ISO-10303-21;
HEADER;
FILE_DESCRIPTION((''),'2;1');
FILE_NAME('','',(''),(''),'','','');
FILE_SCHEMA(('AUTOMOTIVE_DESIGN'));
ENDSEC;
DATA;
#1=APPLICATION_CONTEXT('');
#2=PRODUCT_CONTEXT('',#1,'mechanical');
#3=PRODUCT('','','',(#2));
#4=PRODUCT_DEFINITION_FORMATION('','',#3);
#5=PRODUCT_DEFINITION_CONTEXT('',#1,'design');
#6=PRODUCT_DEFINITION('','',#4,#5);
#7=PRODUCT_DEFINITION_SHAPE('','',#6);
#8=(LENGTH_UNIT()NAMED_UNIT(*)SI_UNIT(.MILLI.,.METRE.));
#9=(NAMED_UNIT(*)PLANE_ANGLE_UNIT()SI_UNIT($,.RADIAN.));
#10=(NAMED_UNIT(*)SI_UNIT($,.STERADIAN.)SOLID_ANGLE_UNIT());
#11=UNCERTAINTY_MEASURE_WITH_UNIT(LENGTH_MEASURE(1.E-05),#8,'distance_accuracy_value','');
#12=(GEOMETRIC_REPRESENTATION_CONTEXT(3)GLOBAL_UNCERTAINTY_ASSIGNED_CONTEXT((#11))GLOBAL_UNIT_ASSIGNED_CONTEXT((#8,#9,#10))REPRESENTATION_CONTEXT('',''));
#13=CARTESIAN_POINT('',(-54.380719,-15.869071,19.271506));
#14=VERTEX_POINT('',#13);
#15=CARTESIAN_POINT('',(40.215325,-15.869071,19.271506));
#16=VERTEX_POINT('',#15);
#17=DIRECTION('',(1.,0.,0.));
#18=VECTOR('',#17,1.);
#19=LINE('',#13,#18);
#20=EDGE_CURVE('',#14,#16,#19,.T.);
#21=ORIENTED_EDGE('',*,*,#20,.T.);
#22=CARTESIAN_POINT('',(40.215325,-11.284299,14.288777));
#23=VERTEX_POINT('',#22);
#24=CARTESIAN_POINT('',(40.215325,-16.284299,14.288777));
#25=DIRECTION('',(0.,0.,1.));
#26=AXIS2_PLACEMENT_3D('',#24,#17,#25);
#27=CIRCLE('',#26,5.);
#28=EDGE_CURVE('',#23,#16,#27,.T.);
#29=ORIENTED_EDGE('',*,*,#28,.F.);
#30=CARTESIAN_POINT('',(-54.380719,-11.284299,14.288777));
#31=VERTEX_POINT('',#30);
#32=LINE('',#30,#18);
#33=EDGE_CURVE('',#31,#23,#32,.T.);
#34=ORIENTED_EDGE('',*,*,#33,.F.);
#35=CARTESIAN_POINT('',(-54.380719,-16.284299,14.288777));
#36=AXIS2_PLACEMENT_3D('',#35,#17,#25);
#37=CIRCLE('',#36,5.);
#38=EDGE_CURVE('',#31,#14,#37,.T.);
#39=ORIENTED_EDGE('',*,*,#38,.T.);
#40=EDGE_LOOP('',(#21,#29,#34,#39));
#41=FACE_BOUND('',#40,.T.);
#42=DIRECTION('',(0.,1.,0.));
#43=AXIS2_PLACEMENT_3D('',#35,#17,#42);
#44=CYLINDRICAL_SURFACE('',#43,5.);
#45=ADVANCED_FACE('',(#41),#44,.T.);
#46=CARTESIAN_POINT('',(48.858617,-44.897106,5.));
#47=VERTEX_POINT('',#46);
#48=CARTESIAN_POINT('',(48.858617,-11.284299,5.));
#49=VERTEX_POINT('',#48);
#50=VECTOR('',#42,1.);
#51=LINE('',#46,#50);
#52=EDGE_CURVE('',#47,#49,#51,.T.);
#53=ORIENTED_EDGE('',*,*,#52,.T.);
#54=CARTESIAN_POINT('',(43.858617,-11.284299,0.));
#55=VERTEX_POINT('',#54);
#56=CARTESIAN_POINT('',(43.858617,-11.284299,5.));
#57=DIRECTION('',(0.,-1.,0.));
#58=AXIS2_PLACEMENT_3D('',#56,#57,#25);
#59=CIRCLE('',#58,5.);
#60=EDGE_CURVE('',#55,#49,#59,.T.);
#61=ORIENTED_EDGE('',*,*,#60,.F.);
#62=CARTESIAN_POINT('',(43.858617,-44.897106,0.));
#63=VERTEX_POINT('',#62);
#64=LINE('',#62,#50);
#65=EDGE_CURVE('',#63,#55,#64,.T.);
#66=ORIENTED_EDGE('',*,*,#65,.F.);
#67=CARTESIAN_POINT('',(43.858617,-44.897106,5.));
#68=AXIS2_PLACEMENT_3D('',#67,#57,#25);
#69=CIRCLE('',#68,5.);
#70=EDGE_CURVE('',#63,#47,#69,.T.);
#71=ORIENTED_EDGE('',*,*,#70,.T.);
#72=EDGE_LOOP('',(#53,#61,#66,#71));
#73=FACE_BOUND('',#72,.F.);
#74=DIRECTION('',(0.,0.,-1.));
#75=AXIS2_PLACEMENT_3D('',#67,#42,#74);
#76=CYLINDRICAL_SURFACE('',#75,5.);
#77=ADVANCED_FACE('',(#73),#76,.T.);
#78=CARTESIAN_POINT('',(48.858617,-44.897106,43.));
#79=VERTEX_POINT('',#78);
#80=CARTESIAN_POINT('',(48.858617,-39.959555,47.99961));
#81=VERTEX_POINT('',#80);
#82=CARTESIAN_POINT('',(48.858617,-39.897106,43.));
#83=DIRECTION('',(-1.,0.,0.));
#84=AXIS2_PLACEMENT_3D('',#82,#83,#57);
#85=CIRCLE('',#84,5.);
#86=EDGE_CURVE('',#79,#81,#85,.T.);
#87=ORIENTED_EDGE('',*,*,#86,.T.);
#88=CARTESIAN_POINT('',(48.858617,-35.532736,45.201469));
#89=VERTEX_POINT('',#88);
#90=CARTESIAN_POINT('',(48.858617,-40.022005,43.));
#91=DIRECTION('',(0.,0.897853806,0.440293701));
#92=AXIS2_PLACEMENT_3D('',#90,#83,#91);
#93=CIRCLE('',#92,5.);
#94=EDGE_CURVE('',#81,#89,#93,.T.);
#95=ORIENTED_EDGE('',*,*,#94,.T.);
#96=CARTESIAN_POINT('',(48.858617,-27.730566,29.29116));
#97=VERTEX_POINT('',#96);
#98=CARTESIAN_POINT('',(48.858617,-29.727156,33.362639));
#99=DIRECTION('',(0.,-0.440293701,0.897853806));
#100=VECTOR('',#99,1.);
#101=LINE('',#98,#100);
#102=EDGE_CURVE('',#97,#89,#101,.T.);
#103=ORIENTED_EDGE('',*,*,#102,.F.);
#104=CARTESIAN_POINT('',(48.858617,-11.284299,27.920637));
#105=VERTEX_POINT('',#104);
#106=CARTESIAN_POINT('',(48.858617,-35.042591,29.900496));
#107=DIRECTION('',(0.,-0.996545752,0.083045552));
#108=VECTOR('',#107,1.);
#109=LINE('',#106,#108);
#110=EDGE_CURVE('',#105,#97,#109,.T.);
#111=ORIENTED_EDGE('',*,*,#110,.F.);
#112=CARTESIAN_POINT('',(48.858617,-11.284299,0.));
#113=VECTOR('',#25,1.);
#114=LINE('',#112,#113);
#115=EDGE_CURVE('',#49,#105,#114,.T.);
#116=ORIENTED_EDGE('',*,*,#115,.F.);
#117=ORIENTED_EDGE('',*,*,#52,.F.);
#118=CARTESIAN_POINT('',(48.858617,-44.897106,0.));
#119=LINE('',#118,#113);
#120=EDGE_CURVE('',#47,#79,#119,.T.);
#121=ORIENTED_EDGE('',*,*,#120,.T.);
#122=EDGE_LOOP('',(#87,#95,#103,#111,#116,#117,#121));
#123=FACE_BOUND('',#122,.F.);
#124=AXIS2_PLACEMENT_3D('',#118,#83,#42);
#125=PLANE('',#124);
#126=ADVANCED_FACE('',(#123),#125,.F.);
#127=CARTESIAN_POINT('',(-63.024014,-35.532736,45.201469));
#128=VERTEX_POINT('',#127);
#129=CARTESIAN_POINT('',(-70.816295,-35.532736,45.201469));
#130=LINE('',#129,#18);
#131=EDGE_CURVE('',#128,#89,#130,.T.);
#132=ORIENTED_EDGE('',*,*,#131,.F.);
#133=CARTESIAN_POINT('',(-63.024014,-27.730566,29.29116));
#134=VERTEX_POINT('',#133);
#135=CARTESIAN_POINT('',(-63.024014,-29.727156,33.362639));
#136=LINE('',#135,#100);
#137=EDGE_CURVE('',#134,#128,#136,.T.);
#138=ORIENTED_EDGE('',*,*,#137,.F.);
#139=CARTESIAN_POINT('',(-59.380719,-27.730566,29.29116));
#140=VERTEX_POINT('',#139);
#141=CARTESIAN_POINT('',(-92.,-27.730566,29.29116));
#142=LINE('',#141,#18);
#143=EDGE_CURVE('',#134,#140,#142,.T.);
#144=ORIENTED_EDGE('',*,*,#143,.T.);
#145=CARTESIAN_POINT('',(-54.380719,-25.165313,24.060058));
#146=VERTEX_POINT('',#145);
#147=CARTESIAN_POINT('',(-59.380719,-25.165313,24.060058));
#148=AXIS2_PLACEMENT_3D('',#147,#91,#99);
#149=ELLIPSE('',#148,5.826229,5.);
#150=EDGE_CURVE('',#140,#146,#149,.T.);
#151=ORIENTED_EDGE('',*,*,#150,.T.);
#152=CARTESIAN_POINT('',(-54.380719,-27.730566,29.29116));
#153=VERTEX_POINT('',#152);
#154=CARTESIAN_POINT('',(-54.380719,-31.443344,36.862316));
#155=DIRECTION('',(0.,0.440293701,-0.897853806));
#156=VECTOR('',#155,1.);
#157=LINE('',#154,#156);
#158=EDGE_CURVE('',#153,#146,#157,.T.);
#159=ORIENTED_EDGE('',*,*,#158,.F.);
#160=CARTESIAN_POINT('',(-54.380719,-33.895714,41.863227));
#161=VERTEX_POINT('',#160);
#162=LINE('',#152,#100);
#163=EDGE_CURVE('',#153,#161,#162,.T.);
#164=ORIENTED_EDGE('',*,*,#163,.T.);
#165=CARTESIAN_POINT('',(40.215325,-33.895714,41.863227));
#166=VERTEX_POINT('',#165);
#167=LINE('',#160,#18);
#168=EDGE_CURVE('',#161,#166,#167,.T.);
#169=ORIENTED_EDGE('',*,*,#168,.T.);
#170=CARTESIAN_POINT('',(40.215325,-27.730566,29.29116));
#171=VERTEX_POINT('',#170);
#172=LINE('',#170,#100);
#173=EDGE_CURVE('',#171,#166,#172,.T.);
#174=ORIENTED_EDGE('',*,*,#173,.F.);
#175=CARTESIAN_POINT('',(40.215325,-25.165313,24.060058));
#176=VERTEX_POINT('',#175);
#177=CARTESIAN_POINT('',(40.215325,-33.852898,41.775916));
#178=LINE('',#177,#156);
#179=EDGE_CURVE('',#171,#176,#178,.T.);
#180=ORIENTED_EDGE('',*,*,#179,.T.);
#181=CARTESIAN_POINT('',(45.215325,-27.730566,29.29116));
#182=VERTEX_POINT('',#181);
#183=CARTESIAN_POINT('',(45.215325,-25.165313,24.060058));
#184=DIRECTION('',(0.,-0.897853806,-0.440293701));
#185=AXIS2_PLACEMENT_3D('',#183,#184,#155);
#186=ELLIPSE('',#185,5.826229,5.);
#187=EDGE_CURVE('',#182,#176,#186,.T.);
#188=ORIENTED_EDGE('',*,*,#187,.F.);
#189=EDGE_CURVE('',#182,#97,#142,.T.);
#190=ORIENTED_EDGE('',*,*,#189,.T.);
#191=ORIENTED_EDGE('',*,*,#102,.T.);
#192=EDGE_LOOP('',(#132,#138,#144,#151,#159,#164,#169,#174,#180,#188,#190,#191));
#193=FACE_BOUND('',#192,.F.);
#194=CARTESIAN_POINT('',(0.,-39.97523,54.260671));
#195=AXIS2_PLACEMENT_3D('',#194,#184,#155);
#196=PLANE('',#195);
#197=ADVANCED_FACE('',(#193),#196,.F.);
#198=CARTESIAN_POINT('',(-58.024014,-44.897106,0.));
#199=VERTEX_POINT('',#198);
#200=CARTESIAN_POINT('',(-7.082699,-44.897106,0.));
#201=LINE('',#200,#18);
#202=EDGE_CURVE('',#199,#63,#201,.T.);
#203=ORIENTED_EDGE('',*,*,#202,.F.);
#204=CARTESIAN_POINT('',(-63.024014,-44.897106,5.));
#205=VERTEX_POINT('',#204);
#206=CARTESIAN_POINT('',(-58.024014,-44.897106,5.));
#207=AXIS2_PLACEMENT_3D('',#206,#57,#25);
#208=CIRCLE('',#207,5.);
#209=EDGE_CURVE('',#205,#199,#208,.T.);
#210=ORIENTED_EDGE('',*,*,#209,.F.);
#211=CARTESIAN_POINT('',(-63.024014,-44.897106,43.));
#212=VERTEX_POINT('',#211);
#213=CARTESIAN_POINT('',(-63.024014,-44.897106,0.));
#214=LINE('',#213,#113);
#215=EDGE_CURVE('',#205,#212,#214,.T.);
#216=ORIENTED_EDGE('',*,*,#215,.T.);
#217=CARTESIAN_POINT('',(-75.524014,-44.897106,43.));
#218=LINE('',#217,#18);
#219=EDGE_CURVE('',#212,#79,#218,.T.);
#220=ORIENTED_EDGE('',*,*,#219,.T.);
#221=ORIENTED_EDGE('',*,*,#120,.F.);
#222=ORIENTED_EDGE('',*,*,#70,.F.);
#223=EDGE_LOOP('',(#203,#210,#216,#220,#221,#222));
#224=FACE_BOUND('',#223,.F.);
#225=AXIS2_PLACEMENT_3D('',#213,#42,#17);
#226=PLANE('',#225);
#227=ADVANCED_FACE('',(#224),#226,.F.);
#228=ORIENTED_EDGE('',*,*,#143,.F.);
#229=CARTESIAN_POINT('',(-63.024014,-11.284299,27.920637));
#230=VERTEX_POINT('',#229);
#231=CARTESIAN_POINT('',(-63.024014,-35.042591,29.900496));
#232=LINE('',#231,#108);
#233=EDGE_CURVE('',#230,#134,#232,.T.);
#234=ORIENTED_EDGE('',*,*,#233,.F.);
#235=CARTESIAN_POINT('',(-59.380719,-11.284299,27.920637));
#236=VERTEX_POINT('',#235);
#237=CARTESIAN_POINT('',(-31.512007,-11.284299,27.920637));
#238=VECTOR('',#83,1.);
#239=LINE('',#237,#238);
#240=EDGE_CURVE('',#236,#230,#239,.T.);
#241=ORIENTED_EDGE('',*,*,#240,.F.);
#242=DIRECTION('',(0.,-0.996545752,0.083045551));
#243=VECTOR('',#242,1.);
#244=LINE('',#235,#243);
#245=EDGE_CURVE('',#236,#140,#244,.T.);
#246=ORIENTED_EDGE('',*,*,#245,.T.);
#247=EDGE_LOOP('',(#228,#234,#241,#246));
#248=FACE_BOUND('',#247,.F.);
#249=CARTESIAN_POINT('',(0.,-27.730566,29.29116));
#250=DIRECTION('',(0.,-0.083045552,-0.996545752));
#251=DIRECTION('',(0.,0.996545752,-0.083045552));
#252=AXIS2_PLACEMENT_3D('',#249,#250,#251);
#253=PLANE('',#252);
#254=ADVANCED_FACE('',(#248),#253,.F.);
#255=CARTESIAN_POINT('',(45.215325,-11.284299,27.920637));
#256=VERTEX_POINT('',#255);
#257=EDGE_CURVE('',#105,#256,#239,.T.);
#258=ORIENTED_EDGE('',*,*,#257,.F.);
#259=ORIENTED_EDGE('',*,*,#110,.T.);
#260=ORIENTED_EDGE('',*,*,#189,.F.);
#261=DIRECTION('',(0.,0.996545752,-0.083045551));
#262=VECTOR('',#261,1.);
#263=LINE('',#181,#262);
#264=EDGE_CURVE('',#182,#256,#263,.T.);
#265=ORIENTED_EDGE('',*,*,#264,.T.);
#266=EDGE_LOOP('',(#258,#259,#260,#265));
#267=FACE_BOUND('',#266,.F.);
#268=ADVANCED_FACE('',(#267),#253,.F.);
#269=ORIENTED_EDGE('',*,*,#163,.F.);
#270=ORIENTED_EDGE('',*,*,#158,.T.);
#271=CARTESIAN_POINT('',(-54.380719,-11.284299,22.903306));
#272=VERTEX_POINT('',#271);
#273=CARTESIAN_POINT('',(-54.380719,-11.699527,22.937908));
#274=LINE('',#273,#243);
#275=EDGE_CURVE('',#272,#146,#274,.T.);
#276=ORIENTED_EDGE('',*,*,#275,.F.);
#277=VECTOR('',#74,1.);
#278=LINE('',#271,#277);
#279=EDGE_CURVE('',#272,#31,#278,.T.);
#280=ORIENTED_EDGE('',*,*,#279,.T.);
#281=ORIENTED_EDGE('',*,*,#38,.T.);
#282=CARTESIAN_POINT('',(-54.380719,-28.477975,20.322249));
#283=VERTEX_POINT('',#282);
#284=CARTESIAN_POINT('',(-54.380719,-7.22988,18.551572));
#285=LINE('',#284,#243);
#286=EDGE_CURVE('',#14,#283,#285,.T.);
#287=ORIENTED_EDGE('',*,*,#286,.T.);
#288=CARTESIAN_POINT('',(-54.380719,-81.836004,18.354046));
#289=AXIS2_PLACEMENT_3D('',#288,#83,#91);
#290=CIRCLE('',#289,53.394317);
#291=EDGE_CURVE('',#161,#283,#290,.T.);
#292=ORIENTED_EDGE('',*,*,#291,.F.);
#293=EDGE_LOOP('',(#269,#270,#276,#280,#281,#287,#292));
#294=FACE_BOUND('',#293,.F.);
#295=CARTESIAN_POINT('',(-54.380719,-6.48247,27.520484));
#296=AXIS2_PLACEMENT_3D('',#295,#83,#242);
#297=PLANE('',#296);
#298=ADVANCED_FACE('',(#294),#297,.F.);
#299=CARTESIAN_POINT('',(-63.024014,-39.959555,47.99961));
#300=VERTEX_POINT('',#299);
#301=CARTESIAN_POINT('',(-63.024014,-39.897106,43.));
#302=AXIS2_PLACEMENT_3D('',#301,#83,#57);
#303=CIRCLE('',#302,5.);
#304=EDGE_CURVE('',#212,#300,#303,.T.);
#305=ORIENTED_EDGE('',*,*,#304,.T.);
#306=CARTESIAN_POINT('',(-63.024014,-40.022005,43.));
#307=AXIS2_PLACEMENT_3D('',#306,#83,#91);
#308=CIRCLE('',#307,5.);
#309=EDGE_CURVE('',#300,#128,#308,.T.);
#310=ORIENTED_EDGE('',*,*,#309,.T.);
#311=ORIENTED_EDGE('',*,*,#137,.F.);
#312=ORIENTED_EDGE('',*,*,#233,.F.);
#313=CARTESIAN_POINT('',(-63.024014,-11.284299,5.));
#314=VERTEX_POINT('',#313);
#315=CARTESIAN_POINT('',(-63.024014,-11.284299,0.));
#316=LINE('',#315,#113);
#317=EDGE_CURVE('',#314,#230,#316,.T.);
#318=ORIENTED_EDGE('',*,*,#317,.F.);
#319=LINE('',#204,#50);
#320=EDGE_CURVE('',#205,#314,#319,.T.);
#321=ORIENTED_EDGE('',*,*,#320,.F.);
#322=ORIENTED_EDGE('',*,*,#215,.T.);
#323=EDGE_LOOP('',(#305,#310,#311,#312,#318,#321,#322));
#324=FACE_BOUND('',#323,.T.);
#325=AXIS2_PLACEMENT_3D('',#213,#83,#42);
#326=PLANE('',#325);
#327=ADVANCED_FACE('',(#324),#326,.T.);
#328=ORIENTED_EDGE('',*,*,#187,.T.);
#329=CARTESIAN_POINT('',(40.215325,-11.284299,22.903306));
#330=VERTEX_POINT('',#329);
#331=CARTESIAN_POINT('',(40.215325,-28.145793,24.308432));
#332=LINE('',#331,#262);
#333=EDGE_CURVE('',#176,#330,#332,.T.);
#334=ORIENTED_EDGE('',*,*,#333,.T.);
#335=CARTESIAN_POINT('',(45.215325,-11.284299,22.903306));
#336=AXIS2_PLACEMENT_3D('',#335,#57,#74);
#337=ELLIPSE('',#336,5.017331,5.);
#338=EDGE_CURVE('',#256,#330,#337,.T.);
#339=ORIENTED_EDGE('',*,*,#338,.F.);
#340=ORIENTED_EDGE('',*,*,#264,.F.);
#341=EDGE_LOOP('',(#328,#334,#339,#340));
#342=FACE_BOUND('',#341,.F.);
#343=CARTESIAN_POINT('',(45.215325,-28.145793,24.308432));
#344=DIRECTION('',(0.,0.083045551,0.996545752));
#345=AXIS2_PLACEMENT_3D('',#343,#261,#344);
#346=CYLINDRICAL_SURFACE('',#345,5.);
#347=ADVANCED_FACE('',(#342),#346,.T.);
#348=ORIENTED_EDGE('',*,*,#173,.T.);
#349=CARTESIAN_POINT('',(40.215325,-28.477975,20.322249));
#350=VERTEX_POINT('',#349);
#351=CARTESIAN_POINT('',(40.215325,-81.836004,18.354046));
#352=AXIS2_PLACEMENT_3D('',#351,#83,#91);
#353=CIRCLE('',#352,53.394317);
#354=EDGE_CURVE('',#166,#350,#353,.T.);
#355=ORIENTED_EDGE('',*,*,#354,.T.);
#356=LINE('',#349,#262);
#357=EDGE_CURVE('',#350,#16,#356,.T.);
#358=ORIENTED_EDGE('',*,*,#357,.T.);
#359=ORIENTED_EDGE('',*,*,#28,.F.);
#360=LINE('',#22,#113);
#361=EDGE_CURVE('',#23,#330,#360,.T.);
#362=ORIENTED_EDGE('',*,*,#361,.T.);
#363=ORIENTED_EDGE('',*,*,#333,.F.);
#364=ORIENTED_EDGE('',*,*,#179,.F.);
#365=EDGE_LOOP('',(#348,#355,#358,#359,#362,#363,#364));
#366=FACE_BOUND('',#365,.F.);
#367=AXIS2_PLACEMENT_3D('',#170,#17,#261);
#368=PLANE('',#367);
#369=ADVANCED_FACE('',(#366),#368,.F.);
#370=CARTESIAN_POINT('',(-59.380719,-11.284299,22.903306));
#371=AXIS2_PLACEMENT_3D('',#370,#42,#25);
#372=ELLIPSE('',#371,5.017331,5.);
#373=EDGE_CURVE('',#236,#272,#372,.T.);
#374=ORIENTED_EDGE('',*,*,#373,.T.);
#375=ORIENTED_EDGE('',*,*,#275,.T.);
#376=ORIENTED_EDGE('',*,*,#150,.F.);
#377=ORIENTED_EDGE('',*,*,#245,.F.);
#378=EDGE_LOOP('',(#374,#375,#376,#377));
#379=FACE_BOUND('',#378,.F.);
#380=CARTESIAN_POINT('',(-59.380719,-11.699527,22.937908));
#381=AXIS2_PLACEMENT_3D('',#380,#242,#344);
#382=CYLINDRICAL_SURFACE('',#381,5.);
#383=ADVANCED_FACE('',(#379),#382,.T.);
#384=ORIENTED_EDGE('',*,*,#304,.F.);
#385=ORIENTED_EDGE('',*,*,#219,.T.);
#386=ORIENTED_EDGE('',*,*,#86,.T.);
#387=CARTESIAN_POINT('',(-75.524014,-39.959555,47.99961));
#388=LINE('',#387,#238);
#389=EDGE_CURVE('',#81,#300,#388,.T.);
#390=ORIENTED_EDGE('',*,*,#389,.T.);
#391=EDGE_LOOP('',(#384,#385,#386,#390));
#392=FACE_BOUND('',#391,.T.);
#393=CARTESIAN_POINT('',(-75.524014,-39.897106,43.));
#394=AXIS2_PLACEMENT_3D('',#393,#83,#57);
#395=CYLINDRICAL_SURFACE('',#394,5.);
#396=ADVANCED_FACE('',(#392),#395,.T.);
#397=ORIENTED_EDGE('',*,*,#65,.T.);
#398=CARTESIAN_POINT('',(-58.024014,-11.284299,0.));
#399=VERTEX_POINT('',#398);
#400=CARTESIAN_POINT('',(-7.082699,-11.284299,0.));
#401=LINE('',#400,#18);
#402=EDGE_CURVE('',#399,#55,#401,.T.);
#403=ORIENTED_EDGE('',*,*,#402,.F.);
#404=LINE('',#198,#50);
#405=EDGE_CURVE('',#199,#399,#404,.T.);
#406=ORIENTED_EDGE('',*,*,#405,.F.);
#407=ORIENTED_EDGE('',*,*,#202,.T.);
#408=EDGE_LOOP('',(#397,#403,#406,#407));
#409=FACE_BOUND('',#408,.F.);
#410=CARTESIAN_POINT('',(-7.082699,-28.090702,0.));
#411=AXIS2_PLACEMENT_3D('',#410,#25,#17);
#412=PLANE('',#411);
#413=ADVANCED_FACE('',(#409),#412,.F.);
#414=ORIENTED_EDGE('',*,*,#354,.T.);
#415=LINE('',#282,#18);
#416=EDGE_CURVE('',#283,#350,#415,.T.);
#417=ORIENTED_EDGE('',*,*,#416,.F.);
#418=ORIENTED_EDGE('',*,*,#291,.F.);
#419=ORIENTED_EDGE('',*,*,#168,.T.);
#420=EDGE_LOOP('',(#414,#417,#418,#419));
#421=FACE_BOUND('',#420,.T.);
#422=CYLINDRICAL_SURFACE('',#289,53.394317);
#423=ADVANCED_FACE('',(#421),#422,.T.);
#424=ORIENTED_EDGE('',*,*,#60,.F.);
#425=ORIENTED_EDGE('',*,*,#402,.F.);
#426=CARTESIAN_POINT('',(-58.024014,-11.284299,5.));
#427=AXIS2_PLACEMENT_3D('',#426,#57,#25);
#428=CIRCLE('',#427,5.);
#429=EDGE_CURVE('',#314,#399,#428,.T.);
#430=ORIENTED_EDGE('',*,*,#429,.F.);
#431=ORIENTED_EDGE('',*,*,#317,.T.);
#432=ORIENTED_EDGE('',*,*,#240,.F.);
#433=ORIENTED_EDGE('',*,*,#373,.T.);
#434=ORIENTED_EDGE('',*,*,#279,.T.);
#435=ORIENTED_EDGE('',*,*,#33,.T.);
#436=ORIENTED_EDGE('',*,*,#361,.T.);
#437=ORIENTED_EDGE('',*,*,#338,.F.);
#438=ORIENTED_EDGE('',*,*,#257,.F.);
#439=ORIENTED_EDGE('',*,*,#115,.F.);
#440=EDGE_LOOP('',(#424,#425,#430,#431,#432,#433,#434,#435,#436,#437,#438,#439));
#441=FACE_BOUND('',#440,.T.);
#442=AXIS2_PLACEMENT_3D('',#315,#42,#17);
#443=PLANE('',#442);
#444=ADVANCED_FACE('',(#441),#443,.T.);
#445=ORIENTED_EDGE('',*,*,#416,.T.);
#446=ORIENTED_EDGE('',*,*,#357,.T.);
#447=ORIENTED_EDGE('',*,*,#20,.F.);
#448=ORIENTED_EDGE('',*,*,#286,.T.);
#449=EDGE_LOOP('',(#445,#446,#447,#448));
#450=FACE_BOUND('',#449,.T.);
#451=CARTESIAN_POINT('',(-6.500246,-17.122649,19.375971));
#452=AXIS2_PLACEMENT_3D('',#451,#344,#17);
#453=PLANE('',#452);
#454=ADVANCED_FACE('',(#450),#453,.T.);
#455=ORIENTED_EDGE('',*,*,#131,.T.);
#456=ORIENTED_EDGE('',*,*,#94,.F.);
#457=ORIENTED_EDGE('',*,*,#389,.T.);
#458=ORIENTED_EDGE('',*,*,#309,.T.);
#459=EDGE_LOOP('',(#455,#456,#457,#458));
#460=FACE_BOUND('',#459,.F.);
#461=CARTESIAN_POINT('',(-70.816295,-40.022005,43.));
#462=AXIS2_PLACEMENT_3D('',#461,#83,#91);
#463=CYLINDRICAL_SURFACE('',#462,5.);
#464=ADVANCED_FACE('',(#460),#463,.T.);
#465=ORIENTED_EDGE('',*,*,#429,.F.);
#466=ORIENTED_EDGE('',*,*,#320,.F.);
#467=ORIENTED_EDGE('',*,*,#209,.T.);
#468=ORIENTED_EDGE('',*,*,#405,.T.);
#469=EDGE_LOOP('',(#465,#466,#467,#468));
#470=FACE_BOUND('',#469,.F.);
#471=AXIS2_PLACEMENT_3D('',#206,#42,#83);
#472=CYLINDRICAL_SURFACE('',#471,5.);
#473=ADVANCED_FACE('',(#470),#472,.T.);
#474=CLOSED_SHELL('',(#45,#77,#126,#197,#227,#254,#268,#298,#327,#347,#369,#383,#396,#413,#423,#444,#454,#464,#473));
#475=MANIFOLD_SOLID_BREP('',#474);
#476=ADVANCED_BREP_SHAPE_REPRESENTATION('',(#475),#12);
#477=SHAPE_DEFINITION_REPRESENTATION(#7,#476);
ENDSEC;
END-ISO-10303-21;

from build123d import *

# Parameters (mm, degrees)
F0_W         = 111.8826307356
F0_H         = 33.61280635
F1_DEPTH     = 48
F3_DEPTH     = 92
F5_DEPTH     = 9
F6_T1_DEPTH  = 94.5960432291
F7_R         = 5
F8_R         = 5
F9_R         = 5
F10_T1_DEPTH = 136.8826307356
F10_T3_DEPTH = 127.4671918099


# Not quite as in the source:
# - a fillet or chamfer that OpenCascade refuses, or shapes differently, is made with other operations: its cross-section is extruded or revolved along the edge and cut away or added


with BuildPart() as f1:
    # F0 (on Top) → F1 (new body)
    with BuildSketch(Plane.XY):
        with Locations((-7.0826988667, -28.0907023698)):
            Rectangle(F0_W, F0_H)
    extrude(amount=F1_DEPTH)

    # F2 (on Right) → F3 (cut, symmetric)
    with BuildSketch(Plane.YZ):
        Polygon((-2.2725867394, 56.280748791), (-39.9752296507, 54.2606711388), (-27.7305655181, 29.2911604047), (-4.6817823313, 27.3704268038), align=None)
    extrude(amount=F3_DEPTH, both=True, mode=Mode.SUBTRACT)

    # F4 (on face) → F5 (cut)
    with BuildSketch(Plane(origin=(0, 2.2328525009, 26.7942067339), x_dir=(1, 0, 0), z_dir=(0, 0.0830455515, 0.9965457523))):
        Polygon((40.2153246105, -5.8544473723), (-54.3807186186, -8.7455315515), (-54.3807186186, -30.0672778452), (40.2153246105, -30.0672778452), align=None)
    extrude(amount=-F5_DEPTH, mode=Mode.SUBTRACT)

    # F6: fillet of radius 53.3943165321 on 1 edges, made by hand

    # F6_s2 → F6_t1 (cut)
    with BuildSketch(Plane.YZ.offset(-54.3807186186)):
        with BuildLine():
            ThreePointArc((-33.8957137688, 41.863227205), (-30.0543394398, 31.3775725516), (-28.4779754817, 20.3222486342))
            Line((-28.4779754817, 20.3222486342), (-27.7305655181, 29.2911604047))
            Line((-27.7305655181, 29.2911604047), (-33.8957137688, 41.863227205))
        make_face()
    extrude(amount=F6_T1_DEPTH, mode=Mode.SUBTRACT)

    # F7
    f7_edges = [f1.edges().sort_by_distance(p)[0] for p in [
        (-54.380719, -19.507432, 28.605899),
        (40.215325, -19.507432, 28.605899),
    ]]
    fillet(f7_edges, radius=F7_R)

    # F8
    f8_edges = [f1.edges().sort_by_distance(p)[0] for p in [
        (-7.082697, -11.284299, 18.889441),
    ]]
    fillet(f8_edges, radius=F8_R)

    # F9
    f9_edges = [f1.edges().sort_by_distance(p)[0] for p in [
        (-63.024014, -28.090702, 0),
        (48.858617, -28.090702, 0),
    ]]
    fillet(f9_edges, radius=F9_R)

    # F10: fillet of radius 5 on 2 edges, made by hand

    # F10_s2 → F10_t1 (cut)
    with BuildSketch(Plane.YZ.offset(-75.5240142345)):
        with BuildLine():
            ThreePointArc((-44.8971055448, 43), (-43.4326394507, 46.5355339059), (-39.8971055448, 48))
            Line((-39.8971055448, 48), (-44.8971055448, 48))
            Line((-44.8971055448, 48), (-44.8971055448, 43))
        make_face()
    extrude(amount=F10_T1_DEPTH, mode=Mode.SUBTRACT)

    # F10_s4 → F10_t3 (cut)
    with BuildSketch(Plane.YZ.offset(-70.8162947717)):
        with BuildLine():
            ThreePointArc((-35.5327359736, 45.2014685051), (-37.3769475866, 47.2430733275), (-40.0220050033, 48))
            Line((-40.0220050033, 48), (-36.9050927884, 48))
            Line((-36.9050927884, 48), (-35.5327359736, 45.2014685051))
        make_face()
    extrude(amount=F10_T3_DEPTH, mode=Mode.SUBTRACT)


solid = f1.part
